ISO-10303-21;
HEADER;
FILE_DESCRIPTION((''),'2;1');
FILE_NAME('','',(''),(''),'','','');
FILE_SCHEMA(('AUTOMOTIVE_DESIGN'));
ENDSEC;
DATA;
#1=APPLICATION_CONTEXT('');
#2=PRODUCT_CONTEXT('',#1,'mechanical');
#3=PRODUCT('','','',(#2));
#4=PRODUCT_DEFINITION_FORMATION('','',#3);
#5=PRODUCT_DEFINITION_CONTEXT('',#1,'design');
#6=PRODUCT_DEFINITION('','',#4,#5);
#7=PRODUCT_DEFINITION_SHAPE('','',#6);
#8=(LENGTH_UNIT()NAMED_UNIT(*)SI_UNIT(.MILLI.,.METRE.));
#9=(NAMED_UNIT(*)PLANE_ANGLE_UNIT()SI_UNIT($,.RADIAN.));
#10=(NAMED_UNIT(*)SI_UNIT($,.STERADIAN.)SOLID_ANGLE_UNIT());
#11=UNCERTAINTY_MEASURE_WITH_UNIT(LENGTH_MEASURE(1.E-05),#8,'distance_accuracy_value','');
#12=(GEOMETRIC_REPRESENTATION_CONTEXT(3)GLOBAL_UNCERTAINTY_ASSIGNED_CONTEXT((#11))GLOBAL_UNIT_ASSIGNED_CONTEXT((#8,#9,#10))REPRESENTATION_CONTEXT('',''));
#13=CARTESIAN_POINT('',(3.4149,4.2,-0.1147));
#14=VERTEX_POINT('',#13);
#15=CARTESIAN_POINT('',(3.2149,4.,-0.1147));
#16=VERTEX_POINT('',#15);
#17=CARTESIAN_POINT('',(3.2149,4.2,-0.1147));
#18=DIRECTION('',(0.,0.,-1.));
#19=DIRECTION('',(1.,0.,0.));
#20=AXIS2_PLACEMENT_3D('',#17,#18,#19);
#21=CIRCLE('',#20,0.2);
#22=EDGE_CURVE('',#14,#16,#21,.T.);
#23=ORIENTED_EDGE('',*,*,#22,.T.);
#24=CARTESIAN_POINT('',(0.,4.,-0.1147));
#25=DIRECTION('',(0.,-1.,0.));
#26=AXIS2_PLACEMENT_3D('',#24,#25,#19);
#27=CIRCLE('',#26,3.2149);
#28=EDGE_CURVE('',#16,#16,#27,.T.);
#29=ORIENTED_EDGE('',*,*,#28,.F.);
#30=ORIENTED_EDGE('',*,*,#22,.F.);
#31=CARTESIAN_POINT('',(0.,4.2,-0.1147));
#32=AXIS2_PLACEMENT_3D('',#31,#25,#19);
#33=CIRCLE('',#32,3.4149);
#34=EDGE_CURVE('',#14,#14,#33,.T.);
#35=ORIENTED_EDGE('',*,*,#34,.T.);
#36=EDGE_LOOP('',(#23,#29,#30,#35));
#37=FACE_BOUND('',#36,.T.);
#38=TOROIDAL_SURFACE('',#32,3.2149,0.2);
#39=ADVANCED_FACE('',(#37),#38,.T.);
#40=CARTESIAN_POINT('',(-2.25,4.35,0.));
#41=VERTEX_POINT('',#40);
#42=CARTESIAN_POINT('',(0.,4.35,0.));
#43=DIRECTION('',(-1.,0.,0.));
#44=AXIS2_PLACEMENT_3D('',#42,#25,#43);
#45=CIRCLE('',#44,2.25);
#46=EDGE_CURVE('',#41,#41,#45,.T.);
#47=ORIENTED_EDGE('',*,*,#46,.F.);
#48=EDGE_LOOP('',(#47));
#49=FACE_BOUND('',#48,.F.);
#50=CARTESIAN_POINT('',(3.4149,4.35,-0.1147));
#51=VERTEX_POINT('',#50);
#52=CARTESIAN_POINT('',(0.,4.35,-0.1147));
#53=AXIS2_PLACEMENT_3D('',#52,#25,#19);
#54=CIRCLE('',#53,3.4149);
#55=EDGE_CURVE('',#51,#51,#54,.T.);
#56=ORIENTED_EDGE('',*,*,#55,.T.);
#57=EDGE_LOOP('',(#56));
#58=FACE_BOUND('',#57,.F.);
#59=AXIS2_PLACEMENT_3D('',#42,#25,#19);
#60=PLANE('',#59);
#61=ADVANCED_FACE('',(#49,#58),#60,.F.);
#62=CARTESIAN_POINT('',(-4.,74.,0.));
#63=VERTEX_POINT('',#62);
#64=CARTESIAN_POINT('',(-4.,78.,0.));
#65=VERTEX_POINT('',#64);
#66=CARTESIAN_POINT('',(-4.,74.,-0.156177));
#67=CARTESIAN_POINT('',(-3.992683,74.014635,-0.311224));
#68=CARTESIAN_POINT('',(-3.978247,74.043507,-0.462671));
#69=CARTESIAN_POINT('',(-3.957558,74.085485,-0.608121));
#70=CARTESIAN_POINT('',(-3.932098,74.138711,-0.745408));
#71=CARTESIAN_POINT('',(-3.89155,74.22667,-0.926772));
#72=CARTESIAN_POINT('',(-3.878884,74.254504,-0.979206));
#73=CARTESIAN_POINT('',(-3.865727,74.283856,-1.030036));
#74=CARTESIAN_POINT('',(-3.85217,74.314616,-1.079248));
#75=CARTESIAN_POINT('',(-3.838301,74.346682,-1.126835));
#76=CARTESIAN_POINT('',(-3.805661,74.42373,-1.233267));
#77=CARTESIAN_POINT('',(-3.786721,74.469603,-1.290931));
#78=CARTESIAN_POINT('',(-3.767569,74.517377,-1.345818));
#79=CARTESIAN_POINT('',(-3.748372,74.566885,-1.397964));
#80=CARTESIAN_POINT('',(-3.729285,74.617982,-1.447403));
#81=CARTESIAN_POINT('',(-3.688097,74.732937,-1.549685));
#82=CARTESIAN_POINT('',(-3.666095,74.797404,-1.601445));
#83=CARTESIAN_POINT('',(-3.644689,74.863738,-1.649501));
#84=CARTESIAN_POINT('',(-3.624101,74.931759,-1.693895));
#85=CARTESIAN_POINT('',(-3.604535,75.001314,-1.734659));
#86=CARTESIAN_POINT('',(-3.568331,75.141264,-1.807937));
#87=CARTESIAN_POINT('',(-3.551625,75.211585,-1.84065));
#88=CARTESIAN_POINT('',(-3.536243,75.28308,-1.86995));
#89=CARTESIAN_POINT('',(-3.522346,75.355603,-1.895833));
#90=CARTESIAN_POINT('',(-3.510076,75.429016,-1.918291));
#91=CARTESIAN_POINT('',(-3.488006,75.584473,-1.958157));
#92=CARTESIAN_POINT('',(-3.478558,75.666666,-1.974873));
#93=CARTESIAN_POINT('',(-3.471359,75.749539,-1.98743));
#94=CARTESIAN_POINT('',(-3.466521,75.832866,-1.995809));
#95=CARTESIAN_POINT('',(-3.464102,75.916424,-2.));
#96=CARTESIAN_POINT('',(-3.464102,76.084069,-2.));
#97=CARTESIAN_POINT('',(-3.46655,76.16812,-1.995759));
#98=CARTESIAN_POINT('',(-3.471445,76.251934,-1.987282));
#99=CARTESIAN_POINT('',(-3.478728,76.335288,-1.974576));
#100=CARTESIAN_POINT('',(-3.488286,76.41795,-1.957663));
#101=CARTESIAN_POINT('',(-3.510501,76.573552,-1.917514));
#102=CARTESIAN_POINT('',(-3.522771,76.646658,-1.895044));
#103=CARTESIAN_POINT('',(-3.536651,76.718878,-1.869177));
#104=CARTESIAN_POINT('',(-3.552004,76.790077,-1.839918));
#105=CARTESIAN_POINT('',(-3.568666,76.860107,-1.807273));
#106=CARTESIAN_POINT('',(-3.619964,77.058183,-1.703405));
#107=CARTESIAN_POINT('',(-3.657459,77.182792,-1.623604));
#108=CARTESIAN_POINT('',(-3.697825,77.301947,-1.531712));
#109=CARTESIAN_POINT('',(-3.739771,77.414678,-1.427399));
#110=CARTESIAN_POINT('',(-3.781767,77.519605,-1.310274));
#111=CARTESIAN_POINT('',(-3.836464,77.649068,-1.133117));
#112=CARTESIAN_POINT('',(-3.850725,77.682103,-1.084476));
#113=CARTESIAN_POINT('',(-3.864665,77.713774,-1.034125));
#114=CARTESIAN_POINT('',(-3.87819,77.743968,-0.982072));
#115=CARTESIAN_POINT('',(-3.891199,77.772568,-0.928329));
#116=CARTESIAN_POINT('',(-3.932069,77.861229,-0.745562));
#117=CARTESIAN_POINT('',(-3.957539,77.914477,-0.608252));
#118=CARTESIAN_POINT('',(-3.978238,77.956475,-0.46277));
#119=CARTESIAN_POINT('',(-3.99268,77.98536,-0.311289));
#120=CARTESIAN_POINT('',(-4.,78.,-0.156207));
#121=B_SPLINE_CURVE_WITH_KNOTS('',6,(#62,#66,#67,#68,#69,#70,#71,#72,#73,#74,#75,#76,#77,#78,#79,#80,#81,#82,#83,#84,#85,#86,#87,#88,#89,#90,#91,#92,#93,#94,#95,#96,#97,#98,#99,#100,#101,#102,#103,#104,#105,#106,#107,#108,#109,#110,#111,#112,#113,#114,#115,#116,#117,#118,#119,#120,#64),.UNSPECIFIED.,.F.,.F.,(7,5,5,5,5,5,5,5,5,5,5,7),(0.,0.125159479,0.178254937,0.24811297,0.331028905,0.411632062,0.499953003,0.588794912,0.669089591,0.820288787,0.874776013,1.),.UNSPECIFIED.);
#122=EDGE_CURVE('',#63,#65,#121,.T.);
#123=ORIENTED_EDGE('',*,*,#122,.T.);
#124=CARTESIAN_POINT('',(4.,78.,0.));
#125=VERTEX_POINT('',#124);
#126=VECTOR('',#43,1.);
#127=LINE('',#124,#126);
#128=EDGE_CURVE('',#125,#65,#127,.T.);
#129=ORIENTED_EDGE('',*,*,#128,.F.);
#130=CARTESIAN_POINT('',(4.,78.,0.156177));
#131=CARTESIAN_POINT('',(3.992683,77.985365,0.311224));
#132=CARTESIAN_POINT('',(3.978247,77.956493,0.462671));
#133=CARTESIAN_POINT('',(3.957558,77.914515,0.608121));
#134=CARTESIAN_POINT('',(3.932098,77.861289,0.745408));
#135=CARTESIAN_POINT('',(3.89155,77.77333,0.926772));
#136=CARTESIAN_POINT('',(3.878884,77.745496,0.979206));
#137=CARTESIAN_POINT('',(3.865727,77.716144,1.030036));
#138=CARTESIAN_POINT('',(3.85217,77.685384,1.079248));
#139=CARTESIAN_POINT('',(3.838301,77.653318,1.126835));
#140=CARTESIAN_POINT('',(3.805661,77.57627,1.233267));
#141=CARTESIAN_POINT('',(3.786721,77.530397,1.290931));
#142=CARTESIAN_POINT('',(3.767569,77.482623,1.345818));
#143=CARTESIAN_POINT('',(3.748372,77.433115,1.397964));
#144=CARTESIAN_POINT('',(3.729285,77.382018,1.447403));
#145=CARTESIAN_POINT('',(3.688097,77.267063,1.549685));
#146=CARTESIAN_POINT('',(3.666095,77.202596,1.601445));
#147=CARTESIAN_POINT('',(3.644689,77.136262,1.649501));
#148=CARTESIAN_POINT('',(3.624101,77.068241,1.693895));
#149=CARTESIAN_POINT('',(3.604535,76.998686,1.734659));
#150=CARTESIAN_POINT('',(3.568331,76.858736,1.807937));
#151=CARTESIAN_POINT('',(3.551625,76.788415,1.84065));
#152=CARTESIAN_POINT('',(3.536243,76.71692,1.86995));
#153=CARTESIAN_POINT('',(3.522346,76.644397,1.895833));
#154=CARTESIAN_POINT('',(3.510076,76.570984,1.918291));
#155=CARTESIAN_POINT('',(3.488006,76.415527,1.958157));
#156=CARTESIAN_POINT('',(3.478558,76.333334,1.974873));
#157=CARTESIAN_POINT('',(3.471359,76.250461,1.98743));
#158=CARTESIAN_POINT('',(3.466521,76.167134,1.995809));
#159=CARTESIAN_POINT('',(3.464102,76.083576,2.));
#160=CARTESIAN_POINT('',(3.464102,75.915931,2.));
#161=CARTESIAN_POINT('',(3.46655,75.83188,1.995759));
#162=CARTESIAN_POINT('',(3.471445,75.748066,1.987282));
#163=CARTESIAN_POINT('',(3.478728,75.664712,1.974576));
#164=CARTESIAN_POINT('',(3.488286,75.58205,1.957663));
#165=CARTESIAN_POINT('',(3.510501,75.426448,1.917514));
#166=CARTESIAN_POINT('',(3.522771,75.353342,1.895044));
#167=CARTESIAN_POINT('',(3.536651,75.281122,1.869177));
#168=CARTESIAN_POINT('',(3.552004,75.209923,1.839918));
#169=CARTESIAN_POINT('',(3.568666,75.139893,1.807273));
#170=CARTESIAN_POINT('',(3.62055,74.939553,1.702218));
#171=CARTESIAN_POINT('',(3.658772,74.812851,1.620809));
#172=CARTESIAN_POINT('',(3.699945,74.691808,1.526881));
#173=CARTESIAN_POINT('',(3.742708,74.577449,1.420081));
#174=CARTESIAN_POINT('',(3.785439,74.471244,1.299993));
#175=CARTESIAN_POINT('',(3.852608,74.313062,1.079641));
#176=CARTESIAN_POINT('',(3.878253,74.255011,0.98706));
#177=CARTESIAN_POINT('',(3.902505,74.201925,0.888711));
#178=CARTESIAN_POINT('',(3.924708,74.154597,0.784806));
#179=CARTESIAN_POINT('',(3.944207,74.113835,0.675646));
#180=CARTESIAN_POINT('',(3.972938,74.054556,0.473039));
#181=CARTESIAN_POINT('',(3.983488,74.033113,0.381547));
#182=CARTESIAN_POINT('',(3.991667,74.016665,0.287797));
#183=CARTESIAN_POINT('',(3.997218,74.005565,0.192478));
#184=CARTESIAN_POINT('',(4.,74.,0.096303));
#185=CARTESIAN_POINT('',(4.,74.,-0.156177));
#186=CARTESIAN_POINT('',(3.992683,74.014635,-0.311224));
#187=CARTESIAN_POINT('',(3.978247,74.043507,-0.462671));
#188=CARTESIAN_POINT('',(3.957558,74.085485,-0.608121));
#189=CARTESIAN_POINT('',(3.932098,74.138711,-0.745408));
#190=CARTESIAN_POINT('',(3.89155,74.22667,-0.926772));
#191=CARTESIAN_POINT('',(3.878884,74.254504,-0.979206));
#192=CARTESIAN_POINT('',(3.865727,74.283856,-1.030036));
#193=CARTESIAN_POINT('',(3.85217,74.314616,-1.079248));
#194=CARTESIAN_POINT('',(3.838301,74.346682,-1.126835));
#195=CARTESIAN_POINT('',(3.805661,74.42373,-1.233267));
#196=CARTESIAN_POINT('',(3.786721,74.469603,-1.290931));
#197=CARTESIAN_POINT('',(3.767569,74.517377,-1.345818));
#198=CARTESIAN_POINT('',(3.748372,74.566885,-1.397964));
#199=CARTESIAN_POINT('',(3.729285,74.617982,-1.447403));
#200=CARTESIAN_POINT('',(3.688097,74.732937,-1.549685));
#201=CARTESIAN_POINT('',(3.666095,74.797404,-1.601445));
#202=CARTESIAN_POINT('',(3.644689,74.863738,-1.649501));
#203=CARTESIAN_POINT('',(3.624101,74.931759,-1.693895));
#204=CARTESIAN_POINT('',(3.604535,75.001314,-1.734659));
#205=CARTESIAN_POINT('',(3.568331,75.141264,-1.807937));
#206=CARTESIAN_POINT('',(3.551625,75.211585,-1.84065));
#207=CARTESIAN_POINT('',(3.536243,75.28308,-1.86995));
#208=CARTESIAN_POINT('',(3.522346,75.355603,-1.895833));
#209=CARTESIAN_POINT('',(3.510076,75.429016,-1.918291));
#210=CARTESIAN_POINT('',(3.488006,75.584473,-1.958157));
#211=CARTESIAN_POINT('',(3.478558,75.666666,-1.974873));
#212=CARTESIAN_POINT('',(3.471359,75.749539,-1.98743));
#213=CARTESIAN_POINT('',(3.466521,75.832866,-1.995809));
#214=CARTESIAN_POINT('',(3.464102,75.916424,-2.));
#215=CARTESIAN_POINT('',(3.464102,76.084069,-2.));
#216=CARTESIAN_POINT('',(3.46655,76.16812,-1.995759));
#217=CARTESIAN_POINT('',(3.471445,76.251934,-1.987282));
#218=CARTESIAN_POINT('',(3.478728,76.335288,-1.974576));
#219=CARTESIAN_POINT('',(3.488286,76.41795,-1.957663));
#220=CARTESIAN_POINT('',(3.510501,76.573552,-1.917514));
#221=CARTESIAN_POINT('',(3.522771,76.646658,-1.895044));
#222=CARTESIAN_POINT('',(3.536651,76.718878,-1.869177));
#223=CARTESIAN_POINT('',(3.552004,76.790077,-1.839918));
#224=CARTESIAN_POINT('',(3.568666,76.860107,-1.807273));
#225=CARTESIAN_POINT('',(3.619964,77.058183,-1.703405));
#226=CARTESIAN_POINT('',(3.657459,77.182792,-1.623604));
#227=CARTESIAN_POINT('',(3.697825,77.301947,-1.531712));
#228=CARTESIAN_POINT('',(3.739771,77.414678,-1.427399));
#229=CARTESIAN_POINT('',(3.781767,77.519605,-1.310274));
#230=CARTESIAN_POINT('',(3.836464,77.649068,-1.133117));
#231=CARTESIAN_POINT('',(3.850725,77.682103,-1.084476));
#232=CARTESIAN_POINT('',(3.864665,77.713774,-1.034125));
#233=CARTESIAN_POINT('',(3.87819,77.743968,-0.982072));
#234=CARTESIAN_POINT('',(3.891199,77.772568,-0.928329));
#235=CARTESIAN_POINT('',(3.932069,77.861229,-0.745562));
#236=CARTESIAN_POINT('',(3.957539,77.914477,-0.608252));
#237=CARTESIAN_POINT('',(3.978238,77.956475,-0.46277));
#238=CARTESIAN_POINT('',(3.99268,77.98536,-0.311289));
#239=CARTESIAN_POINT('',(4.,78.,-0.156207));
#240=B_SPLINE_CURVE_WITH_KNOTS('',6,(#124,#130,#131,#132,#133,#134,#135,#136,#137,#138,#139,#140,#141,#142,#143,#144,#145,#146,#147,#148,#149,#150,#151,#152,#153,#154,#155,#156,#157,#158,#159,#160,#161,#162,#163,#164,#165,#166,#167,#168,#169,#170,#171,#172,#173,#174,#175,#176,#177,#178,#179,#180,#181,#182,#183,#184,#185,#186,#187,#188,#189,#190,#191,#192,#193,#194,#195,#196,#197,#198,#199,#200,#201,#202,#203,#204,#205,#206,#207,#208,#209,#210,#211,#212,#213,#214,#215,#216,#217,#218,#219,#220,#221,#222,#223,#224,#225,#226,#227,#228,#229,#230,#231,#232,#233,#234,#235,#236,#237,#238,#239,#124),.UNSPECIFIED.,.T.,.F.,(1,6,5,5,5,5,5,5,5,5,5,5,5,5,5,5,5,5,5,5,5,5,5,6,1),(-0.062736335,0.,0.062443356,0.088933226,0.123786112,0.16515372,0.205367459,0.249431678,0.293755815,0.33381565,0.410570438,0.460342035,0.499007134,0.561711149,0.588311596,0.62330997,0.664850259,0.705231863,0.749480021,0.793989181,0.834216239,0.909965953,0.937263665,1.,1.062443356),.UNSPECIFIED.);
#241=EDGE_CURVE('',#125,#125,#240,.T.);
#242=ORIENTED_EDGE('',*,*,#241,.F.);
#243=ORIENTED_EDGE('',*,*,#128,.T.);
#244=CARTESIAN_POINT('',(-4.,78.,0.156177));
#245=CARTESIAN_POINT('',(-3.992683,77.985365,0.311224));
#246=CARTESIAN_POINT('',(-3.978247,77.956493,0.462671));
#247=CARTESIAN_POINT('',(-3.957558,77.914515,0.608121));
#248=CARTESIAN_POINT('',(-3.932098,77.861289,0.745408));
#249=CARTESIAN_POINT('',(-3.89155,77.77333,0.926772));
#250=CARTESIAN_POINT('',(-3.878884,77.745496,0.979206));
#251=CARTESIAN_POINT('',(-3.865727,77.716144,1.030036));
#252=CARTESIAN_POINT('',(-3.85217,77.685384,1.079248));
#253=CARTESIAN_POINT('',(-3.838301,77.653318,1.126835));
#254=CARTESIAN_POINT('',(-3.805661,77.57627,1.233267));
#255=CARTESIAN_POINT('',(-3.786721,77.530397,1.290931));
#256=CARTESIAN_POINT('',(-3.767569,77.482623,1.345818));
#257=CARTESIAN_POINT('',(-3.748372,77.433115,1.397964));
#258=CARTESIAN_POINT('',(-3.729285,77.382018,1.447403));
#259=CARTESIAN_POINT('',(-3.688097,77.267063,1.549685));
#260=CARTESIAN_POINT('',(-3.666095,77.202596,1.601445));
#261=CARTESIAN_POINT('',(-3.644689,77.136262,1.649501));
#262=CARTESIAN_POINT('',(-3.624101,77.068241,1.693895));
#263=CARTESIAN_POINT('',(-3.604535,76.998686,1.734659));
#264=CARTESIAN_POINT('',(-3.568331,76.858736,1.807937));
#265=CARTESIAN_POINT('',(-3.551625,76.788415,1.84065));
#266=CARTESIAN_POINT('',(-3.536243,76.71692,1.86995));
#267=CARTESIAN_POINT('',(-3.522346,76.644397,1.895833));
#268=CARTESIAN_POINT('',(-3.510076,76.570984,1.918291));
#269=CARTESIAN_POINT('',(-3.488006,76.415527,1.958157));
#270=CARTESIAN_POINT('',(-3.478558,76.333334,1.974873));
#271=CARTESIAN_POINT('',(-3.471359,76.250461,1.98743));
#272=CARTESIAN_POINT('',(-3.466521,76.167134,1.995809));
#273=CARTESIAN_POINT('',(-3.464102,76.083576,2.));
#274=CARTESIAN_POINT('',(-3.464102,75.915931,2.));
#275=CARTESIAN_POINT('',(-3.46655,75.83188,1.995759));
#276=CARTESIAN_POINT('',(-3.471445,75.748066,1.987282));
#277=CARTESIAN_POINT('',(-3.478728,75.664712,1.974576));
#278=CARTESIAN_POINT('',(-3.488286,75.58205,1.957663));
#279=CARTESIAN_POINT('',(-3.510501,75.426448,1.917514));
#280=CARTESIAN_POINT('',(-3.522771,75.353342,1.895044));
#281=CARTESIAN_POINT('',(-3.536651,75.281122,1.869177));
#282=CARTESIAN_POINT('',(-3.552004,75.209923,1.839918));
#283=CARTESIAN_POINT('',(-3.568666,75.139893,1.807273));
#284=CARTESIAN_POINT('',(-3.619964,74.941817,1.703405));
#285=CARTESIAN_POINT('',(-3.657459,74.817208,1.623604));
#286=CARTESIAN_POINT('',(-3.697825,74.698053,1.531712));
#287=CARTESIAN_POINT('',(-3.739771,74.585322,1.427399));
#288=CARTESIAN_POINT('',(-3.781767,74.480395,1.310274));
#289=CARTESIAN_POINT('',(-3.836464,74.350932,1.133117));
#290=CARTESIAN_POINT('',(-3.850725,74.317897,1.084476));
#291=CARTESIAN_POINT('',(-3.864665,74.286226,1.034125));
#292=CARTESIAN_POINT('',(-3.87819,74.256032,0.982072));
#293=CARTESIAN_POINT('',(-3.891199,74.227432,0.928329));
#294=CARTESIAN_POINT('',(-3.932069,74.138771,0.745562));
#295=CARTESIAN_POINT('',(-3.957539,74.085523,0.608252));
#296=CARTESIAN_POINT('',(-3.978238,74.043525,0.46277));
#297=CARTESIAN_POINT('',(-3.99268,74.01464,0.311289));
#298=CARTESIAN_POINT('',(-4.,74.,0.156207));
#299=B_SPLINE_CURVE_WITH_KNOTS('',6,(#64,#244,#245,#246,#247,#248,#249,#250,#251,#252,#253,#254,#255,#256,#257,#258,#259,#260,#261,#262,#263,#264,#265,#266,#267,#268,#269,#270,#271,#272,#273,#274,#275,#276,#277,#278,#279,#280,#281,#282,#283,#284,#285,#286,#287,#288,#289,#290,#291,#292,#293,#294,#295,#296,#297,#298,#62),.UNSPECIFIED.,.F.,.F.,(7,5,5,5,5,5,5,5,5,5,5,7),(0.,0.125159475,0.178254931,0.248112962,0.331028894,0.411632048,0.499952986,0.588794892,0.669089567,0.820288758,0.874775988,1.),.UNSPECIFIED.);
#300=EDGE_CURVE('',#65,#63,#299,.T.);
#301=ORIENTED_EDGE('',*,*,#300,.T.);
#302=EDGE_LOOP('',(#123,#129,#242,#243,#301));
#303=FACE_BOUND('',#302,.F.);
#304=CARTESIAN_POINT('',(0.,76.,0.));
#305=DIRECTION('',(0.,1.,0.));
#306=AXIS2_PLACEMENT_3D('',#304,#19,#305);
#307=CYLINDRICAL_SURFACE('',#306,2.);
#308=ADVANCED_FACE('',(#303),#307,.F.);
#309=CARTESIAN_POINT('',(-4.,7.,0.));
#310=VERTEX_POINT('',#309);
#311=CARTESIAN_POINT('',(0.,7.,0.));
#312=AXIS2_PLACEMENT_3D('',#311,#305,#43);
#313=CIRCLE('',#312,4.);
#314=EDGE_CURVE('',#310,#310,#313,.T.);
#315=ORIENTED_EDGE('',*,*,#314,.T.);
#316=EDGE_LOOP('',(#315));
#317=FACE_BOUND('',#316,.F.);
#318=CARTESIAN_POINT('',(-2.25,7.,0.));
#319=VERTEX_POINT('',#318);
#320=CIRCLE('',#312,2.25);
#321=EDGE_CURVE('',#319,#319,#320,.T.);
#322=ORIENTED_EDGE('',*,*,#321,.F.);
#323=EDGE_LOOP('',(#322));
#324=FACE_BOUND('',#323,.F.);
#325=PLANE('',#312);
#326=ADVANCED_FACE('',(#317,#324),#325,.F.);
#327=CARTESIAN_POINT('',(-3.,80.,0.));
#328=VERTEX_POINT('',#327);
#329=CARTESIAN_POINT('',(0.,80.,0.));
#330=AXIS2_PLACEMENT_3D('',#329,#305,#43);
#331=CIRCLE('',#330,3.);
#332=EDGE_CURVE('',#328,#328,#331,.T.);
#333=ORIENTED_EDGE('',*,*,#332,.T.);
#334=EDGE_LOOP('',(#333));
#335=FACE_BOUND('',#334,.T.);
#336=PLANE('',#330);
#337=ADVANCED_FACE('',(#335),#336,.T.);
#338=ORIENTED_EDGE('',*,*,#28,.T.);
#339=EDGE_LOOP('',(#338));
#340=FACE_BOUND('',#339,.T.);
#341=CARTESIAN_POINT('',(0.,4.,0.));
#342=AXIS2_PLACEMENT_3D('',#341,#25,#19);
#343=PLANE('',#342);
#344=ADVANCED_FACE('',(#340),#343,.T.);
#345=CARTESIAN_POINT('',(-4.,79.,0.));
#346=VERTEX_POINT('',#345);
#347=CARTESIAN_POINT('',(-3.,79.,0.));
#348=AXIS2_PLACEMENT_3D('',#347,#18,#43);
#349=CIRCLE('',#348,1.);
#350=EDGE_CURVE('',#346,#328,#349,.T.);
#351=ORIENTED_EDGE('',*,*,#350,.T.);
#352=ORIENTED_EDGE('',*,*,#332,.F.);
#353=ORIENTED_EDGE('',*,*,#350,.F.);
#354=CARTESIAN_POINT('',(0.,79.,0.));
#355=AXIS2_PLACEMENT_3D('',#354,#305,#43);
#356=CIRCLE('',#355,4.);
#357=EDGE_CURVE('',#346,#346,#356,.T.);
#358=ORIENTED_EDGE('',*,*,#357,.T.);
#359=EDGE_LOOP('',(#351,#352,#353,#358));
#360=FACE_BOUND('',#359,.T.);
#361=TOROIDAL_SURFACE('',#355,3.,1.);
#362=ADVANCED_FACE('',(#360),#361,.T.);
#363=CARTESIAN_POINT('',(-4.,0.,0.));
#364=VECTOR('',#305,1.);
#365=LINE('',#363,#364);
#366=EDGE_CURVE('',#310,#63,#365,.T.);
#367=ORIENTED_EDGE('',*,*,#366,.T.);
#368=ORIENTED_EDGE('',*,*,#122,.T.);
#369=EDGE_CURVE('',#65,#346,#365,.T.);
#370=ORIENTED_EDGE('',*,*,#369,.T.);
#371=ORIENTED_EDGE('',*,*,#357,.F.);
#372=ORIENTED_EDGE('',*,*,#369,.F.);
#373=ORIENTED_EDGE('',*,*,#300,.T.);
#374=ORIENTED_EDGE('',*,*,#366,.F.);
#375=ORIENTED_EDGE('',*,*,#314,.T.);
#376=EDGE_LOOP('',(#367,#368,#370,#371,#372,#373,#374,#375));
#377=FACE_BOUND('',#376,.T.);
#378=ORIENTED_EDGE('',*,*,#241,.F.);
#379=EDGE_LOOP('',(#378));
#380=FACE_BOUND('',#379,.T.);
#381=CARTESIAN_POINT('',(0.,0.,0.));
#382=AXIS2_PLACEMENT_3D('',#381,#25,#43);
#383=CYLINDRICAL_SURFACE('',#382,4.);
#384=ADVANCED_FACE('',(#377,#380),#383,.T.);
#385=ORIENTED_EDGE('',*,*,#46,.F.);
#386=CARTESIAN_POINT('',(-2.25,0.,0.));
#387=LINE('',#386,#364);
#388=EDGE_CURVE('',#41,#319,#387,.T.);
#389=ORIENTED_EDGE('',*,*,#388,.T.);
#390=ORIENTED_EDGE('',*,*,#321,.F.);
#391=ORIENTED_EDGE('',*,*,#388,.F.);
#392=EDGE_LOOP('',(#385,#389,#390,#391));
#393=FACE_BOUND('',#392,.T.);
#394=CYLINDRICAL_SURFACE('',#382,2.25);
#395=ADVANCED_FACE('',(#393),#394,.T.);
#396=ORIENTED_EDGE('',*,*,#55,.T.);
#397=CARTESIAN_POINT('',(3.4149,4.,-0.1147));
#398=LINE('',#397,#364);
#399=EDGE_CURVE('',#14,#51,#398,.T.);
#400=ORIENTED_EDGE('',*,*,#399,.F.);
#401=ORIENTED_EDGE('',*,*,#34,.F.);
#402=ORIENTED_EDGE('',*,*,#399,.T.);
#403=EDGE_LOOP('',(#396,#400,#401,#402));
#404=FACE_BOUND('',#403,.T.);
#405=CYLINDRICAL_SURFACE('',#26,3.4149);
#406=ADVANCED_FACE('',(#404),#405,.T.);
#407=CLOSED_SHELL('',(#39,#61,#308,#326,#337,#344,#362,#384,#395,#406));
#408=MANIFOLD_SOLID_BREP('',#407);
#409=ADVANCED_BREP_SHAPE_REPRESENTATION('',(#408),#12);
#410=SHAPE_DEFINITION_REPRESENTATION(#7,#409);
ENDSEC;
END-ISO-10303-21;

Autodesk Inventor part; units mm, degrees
ref_plane "YZ Plane" through (0, 0, 0) normal (1, 0, 0) x (0, 1, 0)
ref_plane "XY Plane" through (0, 0, 0) normal (0, 0, 1) x (1, 0, 0)
sketch "Sketch1" plane through (0, 0, 0) normal (0, 1, 0) x (-1, 0, 0)
  circle A0 centre (0, 0) radius 4
  circle A1 centre (0, 0) radius 2.25
  dimension "d0" = 8
  dimension "d3" = 4.5
extrude "Extrusion1" add sketch "Sketch1" along normal blind 80 contours A0 | A1
extrude "Extrusion2" cut sketch "Sketch1" along normal blind 7
sketch "Sketch2" plane through (0, 0, 0) normal (1, 0, 0) x (0, 1, 0)
  line L0 (80, -4) -> (80, 4) projected
  circle A0 centre (76, 0) radius 2
  point P0 (0, 0)
  dimension "d6" = 4
  dimension "d7" = 4
extrude "Extrusion3" cut sketch "Sketch2" along normal through all both and the other way through all
thread "Thread1" size "M8x1.25" class "6g" standard "ANSI Metric M Profile" length 65
fillet "Fillet1" radius 1 2 edges at (4, 80, 0) (2.25, 0, 0)
ref_plane "Work Plane1" through (0, 73, 0) normal (0, 1, 0) x (-1, 0, 0)
ref_plane "Work Plane2" through (0, 7, 0) normal (0, 1, 0) x (-1, 0, 0)
extrude "Extrusion4" cut sketch "Sketch1" along normal blind 4 contours A1
sketch "Sketch3" plane through (0, 4, 0) normal (0, -1, 0) x (1, 0, 0)
  circle A0 centre (0, -0.1147) radius 3.4149
  point P0 (0, 0)
extrude "Extrusion5" add sketch "Sketch3" against normal blind 0.35
fillet "Fillet3" radius 0.2 1 edges at (-3.4149, 4, -0.1147)
properties part number "clampScrew"
